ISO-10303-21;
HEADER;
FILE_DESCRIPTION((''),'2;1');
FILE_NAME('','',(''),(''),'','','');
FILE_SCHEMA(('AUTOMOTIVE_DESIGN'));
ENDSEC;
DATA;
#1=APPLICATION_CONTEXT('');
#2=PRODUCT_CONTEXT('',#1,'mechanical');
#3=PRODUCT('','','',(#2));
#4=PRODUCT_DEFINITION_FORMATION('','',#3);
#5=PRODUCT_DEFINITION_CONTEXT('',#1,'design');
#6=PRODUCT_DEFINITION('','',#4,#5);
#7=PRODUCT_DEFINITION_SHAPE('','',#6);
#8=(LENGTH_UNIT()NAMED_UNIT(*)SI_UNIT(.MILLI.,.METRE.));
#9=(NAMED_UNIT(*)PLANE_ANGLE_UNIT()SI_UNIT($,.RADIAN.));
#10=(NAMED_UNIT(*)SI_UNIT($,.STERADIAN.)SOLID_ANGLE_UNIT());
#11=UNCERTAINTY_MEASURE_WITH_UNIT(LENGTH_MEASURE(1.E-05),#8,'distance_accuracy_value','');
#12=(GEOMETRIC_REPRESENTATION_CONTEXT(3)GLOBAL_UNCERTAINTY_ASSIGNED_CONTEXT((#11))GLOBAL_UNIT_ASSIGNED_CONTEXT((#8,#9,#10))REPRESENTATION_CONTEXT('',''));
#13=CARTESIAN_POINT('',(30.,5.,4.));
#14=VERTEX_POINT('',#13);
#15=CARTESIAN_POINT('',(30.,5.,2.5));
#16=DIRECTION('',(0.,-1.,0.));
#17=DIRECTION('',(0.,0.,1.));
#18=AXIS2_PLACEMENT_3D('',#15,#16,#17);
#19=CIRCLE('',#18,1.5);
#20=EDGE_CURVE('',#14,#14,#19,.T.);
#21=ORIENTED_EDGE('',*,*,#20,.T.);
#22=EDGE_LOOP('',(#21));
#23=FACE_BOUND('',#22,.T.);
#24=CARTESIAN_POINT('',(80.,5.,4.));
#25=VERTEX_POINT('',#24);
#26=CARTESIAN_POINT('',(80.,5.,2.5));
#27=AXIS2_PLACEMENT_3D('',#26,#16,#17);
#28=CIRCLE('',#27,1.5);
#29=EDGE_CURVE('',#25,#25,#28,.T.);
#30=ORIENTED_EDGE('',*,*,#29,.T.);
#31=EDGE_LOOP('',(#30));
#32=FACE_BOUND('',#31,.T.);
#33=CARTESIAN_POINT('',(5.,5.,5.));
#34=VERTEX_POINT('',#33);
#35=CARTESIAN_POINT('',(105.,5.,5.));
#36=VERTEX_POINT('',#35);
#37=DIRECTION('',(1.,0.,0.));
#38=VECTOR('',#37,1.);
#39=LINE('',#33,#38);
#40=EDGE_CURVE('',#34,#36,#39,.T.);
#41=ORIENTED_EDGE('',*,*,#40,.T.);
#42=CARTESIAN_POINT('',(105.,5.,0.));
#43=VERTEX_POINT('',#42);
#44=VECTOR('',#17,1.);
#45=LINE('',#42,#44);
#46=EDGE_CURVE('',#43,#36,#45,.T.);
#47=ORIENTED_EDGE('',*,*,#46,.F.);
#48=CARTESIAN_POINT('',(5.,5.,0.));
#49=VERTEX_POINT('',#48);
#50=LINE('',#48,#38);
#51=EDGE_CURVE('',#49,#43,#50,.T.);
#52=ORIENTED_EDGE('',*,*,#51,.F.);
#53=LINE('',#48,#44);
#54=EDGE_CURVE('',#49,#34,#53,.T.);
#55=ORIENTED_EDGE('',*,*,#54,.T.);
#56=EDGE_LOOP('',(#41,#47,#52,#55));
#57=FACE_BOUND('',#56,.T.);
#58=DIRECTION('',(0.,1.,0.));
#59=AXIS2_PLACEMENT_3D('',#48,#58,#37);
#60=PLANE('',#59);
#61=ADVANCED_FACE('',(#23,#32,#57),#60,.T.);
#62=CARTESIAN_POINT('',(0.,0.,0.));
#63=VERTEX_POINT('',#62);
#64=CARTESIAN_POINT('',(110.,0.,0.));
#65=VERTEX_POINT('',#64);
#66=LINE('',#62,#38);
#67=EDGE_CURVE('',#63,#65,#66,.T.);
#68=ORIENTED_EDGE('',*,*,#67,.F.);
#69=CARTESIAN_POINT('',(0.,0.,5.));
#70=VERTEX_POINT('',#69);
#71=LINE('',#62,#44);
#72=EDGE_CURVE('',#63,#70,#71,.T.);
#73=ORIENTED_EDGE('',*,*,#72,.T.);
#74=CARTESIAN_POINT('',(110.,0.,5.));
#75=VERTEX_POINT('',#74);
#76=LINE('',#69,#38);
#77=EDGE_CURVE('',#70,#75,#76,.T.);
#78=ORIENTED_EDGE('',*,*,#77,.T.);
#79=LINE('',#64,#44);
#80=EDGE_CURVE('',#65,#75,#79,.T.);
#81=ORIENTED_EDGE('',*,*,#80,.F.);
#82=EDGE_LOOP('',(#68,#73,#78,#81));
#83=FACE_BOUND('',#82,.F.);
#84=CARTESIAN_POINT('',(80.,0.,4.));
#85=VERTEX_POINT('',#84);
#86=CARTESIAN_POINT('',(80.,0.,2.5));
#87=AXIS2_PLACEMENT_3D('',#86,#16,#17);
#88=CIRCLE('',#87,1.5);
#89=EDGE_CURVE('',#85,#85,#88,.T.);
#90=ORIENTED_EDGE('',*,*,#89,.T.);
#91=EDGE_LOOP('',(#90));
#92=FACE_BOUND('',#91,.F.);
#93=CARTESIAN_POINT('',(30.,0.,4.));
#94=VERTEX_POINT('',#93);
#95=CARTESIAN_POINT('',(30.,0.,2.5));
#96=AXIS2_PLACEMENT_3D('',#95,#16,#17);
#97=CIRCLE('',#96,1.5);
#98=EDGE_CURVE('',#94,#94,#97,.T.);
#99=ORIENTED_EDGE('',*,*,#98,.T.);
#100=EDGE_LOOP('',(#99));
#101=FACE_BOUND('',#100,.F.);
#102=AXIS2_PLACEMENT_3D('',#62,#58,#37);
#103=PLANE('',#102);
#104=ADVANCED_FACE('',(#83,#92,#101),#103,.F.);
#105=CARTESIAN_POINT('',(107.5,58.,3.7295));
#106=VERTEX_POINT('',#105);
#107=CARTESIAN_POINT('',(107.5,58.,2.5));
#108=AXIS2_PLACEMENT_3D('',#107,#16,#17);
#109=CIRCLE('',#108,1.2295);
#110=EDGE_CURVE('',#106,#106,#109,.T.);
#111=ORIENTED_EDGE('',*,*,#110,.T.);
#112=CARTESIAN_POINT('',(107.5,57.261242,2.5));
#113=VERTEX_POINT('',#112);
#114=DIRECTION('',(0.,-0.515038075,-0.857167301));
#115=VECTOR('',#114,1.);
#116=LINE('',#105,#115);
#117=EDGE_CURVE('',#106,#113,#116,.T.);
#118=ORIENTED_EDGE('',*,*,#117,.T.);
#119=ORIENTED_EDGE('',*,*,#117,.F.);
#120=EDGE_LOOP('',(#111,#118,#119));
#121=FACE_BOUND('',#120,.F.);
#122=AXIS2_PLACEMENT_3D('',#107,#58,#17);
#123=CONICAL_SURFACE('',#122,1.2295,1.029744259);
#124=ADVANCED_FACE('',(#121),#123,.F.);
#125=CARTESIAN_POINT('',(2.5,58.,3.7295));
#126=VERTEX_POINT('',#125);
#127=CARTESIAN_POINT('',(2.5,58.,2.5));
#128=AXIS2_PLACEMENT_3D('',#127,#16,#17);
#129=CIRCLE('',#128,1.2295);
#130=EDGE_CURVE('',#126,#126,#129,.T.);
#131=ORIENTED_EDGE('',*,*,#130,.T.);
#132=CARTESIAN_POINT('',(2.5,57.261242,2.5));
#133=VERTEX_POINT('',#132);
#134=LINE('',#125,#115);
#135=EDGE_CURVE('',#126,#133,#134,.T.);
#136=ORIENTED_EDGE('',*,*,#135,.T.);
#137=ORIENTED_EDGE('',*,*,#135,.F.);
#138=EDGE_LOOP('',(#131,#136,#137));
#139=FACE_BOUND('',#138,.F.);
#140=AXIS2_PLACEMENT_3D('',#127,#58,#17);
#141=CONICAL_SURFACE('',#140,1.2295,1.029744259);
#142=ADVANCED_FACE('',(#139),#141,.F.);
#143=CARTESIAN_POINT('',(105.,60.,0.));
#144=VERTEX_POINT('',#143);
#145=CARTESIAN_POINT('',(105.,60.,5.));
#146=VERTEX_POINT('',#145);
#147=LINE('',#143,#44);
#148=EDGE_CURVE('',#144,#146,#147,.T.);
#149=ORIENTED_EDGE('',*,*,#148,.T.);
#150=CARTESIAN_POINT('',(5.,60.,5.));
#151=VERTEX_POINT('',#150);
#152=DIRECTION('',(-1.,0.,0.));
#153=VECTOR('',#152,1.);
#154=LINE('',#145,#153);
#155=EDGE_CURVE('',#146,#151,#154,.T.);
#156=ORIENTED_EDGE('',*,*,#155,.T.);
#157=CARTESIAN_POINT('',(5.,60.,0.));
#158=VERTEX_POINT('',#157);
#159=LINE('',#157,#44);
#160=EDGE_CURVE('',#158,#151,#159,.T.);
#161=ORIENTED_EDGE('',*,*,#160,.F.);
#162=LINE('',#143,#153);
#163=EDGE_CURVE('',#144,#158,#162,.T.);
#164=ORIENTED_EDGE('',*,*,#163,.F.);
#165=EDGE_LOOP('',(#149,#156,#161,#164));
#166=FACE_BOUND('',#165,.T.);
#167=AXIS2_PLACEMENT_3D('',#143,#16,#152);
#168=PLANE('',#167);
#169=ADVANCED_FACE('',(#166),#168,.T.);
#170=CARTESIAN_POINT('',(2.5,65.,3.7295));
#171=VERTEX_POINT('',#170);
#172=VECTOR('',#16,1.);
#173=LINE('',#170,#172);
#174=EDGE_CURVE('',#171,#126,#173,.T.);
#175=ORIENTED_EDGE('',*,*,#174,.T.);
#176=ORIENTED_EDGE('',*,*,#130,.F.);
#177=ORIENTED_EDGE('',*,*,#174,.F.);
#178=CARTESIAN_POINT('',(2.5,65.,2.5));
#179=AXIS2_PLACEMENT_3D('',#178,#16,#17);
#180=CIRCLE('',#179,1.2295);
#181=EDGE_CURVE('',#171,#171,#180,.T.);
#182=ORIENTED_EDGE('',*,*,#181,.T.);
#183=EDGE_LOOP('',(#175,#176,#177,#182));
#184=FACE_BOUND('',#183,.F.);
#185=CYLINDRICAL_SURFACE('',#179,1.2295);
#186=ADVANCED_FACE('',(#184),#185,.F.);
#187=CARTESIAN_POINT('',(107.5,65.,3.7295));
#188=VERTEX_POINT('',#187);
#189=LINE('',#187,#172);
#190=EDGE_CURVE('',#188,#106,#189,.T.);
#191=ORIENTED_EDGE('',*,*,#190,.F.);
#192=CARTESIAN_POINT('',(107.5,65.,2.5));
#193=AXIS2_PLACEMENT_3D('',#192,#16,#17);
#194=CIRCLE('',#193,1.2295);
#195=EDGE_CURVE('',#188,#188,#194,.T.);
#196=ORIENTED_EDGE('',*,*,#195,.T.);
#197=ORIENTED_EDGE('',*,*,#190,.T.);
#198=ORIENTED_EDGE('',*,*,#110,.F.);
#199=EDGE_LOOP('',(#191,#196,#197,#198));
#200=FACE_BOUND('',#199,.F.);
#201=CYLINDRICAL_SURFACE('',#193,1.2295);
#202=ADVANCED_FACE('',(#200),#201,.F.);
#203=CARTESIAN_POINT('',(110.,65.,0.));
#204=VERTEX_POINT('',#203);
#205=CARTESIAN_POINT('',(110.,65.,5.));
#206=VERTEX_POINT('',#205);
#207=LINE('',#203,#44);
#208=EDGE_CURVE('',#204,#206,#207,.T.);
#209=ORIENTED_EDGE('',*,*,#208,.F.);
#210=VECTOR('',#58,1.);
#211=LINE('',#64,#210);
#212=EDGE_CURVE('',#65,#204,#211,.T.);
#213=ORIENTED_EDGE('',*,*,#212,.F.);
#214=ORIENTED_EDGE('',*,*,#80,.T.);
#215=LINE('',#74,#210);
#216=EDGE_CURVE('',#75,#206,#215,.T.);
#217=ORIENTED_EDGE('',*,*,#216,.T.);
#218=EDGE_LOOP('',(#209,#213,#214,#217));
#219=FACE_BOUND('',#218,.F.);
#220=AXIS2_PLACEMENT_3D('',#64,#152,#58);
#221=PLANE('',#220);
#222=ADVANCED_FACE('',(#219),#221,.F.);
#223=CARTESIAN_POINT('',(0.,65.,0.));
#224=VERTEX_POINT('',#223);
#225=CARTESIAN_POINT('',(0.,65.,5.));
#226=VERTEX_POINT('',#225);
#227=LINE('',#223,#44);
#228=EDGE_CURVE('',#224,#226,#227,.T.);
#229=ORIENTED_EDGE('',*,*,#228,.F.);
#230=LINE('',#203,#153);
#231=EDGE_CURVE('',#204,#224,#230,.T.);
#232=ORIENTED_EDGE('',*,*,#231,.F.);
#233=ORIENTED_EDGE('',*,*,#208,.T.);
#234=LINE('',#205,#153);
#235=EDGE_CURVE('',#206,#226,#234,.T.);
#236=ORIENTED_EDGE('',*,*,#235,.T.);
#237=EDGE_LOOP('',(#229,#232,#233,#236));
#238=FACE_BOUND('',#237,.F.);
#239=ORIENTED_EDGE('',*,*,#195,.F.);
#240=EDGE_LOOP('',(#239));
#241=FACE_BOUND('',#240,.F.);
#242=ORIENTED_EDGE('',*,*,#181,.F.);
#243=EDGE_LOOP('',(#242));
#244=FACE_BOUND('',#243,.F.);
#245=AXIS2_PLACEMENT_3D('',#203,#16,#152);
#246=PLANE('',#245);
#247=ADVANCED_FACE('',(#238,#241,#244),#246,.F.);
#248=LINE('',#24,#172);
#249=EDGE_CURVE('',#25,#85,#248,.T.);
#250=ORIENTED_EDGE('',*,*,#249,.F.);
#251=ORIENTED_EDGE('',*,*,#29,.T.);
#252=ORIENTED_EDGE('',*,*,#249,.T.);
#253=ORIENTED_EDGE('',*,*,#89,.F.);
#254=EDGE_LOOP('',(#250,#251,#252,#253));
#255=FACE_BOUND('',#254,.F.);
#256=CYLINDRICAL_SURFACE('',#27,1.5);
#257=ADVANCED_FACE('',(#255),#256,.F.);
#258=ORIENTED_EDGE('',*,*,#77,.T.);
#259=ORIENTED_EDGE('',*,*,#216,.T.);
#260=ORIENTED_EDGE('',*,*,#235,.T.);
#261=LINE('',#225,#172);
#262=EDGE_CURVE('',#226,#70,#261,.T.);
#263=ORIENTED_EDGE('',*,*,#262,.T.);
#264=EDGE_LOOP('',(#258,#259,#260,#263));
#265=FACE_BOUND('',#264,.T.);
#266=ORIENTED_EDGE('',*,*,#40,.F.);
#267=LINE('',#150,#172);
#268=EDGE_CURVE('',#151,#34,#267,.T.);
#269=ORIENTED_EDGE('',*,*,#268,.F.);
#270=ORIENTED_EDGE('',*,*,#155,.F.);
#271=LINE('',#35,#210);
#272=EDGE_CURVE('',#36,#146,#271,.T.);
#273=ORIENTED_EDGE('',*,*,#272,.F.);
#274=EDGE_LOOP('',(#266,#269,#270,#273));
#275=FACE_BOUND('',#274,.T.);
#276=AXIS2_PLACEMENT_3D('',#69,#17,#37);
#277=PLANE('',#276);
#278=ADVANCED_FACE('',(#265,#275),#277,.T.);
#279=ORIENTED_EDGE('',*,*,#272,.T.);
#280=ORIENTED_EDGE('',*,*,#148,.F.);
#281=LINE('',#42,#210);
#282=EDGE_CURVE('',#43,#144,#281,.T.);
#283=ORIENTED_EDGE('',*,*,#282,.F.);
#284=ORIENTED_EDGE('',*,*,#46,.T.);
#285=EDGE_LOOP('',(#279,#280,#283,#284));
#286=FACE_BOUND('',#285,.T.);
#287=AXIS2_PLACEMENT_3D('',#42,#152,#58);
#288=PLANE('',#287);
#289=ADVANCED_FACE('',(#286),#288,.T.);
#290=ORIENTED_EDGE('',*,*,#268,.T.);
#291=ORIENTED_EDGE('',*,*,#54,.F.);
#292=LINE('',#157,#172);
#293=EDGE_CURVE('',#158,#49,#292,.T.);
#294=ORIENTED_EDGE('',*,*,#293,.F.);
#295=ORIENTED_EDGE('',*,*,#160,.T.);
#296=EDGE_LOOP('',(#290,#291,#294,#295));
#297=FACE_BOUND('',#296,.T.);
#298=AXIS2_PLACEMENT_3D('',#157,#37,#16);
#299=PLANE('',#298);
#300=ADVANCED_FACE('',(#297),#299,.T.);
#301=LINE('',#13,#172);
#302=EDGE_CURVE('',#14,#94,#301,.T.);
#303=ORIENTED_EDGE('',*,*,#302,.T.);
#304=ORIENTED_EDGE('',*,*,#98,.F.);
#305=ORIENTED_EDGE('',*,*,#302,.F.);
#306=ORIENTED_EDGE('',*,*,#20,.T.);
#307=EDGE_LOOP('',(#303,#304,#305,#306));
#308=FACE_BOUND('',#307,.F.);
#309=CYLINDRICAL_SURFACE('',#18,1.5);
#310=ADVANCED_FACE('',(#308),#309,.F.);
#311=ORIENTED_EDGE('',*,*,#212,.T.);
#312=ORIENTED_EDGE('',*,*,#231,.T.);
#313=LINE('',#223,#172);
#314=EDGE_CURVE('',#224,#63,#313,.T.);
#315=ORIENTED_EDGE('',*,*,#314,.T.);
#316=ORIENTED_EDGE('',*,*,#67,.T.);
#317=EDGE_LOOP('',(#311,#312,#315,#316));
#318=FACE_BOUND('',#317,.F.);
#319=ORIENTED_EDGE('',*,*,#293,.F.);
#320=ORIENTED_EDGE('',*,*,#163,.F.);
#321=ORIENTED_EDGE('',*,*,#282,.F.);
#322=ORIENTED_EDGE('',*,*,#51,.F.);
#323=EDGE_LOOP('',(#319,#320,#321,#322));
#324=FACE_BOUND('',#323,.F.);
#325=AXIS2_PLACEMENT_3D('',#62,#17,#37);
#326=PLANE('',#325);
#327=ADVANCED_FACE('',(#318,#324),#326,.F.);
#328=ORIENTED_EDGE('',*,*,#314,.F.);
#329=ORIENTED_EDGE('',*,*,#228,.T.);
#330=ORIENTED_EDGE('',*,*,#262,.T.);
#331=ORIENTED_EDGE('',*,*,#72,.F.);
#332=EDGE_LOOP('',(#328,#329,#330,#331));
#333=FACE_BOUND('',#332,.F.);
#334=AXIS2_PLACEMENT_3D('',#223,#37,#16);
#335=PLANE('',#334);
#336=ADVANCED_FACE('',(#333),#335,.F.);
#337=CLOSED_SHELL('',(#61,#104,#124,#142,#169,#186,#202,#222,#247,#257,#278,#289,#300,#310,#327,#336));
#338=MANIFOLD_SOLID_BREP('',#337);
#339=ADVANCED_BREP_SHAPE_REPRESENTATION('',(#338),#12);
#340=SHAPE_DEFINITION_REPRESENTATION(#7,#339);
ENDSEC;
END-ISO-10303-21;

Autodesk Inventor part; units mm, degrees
ref_plane "YZ Plane" through (0, 0, 0) normal (1, 0, 0) x (0, 1, 0)
ref_plane "XZ Plane" through (0, 0, 0) normal (0, 1, 0) x (-1, 0, 0)
ref_plane "XY Plane" through (0, 0, 0) normal (0, 0, 1) x (1, 0, 0)
sketch "Sketch1" plane through (0, 0, 0) normal (0, 0, 1) x (1, 0, 0)
  line L0 (0, 0) -> (110, 0)
  line L1 (110, 0) -> (110, 65)
  line L2 (110, 65) -> (0, 65)
  line L3 (0, 65) -> (0, 0)
  line L4 (5, 5) -> (105, 5)
  line L5 (105, 5) -> (105, 60)
  line L6 (105, 60) -> (5, 60)
  line L7 (5, 60) -> (5, 5)
  dimension "d0" = 65
  dimension "d1" = 110
  dimension "d4" = 5
extrude "Extrusion1" add sketch "Sketch1" along normal blind 5 contours L3 L2 L1 L0 | L7 L6 L5 L4
extrude "Extrusion2" cut sketch "Sketch1" along normal blind 5 contours L7 L6 L5 L4
sketch "Sketch2" plane through (0, 65, 0) normal (0, 1, 0) x (1, 0, 0)
  line L0 (110, 0) -> (110, -5) projected
  line L1 (110, 0) -> (0, 0) projected
  line L2 (0, 0) -> (0, -5) projected
  point P0 (2.5, -2.5)
  point P1 (107.5, -2.5)
  dimension "d14" = 2.5
  dimension "d15" = 2.5
  dimension "d16" = 2.5
  dimension "d17" = 2.5
hole "Hole1" at (2.5, 65, 2.5) at (107.5, 65, 2.5) direction (0, -1, 0) diameter 2.459 depth 7 tip angle 118 thread size "M3x0.5" class "6H" standard "ISO Metric profile"
sketch "Sketch4" plane through (5, 5, 0) normal (0, 1, 0) x (1, 0, 0)
  line L0 (0, 0) -> (0, -5) construction
  line L1 (0, -2.5) -> (100, -2.5) construction
  line L2 (100, 0) -> (100, -5) construction
  point P0 (-5, 0)
  point P1 (75, -2.5)
  point P2 (25, -2.5)
  dimension "d36" = 25
  dimension "d37" = 25
hole "Hole3" at (80, 5, 2.5) at (30, 5, 2.5) direction (0, -1, 0) diameter 3 depth 8.8 tip angle 118
properties part number "Camera plate shell" material "Aluminum 6061"
